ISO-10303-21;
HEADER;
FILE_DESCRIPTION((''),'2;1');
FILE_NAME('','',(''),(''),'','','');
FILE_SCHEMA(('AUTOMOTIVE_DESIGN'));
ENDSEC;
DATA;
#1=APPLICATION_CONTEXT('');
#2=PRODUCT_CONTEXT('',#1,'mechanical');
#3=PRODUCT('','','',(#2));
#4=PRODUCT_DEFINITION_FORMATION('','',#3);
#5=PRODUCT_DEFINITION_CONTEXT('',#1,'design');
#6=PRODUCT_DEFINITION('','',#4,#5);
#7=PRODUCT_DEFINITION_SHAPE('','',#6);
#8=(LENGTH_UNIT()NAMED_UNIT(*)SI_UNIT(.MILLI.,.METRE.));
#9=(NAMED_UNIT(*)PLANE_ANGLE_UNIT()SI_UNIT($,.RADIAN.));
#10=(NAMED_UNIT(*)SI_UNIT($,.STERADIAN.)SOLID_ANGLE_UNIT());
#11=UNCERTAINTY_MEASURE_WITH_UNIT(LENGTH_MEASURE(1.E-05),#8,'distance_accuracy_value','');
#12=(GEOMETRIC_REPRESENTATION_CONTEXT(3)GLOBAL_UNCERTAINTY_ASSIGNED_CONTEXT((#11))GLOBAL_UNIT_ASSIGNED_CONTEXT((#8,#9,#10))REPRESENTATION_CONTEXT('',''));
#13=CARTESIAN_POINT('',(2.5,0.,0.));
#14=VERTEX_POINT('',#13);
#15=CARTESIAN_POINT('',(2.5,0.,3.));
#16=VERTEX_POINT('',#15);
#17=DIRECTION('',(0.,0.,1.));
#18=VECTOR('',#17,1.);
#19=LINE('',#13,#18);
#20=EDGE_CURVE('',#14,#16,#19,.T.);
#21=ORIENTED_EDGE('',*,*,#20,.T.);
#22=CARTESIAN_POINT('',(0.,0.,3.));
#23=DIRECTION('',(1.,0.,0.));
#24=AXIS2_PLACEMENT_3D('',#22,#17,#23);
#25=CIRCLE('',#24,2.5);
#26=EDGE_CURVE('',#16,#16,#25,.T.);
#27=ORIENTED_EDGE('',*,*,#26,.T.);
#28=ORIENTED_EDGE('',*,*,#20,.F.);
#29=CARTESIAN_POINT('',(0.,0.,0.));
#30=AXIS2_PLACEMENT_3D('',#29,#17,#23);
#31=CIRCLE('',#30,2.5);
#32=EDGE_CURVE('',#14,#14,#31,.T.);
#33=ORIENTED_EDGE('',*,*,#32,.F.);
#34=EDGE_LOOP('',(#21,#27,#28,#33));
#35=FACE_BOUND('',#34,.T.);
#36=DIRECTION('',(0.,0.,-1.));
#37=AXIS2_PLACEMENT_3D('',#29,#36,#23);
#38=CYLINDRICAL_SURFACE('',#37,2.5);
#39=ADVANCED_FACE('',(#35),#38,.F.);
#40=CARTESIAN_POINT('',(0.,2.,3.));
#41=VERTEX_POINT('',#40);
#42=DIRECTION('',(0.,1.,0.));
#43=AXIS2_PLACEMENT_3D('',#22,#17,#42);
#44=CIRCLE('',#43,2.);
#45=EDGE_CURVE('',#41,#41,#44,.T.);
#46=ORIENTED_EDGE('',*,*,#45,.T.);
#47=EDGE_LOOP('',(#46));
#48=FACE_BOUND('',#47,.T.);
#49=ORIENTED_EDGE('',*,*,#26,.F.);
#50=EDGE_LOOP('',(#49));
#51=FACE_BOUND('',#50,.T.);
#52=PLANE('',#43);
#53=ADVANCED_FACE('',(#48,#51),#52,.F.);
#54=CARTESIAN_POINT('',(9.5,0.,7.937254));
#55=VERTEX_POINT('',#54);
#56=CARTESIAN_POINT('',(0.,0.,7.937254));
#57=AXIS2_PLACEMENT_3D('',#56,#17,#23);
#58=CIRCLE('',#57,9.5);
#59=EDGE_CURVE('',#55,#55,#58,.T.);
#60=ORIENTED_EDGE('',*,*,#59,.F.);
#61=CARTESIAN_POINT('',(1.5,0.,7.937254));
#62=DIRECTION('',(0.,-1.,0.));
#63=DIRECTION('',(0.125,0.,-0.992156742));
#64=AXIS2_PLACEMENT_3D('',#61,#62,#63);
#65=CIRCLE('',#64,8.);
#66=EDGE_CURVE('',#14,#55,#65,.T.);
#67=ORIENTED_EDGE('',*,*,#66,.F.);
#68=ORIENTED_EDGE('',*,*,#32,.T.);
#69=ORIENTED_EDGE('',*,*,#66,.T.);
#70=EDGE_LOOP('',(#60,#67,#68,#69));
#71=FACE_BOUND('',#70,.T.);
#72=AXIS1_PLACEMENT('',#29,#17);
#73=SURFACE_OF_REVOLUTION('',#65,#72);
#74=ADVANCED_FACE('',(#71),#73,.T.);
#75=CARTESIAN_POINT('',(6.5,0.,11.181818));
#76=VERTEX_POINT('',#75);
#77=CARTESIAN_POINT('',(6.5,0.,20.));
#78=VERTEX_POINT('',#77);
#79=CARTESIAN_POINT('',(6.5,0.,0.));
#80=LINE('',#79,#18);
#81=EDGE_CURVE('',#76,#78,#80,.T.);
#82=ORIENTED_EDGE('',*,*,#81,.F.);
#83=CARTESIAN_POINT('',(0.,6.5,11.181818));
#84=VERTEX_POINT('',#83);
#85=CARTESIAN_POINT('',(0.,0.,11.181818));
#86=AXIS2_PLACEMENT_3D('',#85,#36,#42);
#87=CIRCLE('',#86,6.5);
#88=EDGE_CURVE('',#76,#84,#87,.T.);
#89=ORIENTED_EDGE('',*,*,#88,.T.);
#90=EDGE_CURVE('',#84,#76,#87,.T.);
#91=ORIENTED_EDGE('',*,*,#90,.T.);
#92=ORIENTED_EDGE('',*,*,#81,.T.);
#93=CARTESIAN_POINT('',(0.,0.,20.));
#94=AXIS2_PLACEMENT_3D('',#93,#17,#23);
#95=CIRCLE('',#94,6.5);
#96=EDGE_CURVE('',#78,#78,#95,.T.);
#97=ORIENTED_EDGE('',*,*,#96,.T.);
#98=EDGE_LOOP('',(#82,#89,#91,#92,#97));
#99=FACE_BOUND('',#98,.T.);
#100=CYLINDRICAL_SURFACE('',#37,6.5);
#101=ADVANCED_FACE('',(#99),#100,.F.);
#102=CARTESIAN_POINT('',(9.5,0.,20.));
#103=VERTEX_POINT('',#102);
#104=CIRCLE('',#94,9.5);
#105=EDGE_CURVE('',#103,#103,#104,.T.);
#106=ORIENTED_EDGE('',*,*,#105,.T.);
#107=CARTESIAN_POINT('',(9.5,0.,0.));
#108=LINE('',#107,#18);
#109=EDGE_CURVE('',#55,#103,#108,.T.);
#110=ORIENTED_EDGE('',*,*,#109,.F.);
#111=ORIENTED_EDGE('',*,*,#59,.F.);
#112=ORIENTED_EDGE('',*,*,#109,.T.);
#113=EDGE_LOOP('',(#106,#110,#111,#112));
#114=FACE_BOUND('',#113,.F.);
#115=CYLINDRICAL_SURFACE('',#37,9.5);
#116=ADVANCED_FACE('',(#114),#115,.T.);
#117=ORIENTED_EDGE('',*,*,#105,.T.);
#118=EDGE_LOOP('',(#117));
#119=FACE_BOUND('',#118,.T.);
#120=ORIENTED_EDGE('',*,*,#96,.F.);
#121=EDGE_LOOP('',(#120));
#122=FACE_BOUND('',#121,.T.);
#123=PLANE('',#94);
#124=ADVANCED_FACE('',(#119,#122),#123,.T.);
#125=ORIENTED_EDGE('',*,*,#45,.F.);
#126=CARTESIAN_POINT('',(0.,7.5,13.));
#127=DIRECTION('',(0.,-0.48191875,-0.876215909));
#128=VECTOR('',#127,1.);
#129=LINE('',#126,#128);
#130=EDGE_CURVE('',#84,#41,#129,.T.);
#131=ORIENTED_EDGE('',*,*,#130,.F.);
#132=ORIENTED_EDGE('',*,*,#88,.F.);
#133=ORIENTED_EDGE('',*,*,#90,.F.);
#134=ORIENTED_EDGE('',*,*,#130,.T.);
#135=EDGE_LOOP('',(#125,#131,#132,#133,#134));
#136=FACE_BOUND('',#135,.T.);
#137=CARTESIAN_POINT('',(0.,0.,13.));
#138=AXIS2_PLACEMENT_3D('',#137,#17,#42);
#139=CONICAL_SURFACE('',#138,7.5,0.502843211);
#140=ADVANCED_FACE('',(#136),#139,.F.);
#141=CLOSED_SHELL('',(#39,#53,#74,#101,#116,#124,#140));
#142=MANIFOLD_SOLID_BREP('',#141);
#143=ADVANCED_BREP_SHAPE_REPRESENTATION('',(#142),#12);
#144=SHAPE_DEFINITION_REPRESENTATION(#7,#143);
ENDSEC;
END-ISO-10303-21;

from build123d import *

# Parameters (mm, degrees)
F0_R     = 6.5
F0_R_2   = 2.5
F1_DEPTH = 3
F0_R_3   = 9.5
F2_DEPTH = 20


# Not quite as in the source:
# - a fillet or chamfer that OpenCascade refuses, or shapes differently, is made with other operations: its cross-section is extruded or revolved along the edge and cut away or added


with BuildPart() as f1:
    # F0 (on Top) → F1 (new body)
    with BuildSketch(Plane.XY):
        Circle(F0_R)
        Circle(F0_R_2, mode=Mode.SUBTRACT)
    extrude(amount=F1_DEPTH)

    # F0 (on Top) → F2 (join)
    with BuildSketch(Plane.XY):
        Circle(F0_R_3)
        Circle(F0_R, mode=Mode.SUBTRACT)
    extrude(amount=F2_DEPTH)

    # F3: fillet of radius 8 on 1 edges, made by hand

    # F3_s1 → F3_t2 (revolve, cut)
    with BuildSketch(Plane.XZ):
        with BuildLine():
            ThreePointArc((2.5, 0), (7.5, 2.6457513111), (9.5, 7.9372539332))
            Line((9.5, 7.9372539332), (9.5, 0))
            Line((9.5, 0), (2.5, 0))
        make_face()
    revolve(axis=Axis((0, 0, 0), (0, 0, 1)), mode=Mode.SUBTRACT)

    # F4 (on Right) → F5 (revolve)
    with BuildSketch(Plane.YZ):
        Polygon((7.5, 13), (2, 3), (7.5, 3), align=None)
    revolve(axis=Axis((0, 0, 1.5), (0, 0, 1)))


solid = f1.part
